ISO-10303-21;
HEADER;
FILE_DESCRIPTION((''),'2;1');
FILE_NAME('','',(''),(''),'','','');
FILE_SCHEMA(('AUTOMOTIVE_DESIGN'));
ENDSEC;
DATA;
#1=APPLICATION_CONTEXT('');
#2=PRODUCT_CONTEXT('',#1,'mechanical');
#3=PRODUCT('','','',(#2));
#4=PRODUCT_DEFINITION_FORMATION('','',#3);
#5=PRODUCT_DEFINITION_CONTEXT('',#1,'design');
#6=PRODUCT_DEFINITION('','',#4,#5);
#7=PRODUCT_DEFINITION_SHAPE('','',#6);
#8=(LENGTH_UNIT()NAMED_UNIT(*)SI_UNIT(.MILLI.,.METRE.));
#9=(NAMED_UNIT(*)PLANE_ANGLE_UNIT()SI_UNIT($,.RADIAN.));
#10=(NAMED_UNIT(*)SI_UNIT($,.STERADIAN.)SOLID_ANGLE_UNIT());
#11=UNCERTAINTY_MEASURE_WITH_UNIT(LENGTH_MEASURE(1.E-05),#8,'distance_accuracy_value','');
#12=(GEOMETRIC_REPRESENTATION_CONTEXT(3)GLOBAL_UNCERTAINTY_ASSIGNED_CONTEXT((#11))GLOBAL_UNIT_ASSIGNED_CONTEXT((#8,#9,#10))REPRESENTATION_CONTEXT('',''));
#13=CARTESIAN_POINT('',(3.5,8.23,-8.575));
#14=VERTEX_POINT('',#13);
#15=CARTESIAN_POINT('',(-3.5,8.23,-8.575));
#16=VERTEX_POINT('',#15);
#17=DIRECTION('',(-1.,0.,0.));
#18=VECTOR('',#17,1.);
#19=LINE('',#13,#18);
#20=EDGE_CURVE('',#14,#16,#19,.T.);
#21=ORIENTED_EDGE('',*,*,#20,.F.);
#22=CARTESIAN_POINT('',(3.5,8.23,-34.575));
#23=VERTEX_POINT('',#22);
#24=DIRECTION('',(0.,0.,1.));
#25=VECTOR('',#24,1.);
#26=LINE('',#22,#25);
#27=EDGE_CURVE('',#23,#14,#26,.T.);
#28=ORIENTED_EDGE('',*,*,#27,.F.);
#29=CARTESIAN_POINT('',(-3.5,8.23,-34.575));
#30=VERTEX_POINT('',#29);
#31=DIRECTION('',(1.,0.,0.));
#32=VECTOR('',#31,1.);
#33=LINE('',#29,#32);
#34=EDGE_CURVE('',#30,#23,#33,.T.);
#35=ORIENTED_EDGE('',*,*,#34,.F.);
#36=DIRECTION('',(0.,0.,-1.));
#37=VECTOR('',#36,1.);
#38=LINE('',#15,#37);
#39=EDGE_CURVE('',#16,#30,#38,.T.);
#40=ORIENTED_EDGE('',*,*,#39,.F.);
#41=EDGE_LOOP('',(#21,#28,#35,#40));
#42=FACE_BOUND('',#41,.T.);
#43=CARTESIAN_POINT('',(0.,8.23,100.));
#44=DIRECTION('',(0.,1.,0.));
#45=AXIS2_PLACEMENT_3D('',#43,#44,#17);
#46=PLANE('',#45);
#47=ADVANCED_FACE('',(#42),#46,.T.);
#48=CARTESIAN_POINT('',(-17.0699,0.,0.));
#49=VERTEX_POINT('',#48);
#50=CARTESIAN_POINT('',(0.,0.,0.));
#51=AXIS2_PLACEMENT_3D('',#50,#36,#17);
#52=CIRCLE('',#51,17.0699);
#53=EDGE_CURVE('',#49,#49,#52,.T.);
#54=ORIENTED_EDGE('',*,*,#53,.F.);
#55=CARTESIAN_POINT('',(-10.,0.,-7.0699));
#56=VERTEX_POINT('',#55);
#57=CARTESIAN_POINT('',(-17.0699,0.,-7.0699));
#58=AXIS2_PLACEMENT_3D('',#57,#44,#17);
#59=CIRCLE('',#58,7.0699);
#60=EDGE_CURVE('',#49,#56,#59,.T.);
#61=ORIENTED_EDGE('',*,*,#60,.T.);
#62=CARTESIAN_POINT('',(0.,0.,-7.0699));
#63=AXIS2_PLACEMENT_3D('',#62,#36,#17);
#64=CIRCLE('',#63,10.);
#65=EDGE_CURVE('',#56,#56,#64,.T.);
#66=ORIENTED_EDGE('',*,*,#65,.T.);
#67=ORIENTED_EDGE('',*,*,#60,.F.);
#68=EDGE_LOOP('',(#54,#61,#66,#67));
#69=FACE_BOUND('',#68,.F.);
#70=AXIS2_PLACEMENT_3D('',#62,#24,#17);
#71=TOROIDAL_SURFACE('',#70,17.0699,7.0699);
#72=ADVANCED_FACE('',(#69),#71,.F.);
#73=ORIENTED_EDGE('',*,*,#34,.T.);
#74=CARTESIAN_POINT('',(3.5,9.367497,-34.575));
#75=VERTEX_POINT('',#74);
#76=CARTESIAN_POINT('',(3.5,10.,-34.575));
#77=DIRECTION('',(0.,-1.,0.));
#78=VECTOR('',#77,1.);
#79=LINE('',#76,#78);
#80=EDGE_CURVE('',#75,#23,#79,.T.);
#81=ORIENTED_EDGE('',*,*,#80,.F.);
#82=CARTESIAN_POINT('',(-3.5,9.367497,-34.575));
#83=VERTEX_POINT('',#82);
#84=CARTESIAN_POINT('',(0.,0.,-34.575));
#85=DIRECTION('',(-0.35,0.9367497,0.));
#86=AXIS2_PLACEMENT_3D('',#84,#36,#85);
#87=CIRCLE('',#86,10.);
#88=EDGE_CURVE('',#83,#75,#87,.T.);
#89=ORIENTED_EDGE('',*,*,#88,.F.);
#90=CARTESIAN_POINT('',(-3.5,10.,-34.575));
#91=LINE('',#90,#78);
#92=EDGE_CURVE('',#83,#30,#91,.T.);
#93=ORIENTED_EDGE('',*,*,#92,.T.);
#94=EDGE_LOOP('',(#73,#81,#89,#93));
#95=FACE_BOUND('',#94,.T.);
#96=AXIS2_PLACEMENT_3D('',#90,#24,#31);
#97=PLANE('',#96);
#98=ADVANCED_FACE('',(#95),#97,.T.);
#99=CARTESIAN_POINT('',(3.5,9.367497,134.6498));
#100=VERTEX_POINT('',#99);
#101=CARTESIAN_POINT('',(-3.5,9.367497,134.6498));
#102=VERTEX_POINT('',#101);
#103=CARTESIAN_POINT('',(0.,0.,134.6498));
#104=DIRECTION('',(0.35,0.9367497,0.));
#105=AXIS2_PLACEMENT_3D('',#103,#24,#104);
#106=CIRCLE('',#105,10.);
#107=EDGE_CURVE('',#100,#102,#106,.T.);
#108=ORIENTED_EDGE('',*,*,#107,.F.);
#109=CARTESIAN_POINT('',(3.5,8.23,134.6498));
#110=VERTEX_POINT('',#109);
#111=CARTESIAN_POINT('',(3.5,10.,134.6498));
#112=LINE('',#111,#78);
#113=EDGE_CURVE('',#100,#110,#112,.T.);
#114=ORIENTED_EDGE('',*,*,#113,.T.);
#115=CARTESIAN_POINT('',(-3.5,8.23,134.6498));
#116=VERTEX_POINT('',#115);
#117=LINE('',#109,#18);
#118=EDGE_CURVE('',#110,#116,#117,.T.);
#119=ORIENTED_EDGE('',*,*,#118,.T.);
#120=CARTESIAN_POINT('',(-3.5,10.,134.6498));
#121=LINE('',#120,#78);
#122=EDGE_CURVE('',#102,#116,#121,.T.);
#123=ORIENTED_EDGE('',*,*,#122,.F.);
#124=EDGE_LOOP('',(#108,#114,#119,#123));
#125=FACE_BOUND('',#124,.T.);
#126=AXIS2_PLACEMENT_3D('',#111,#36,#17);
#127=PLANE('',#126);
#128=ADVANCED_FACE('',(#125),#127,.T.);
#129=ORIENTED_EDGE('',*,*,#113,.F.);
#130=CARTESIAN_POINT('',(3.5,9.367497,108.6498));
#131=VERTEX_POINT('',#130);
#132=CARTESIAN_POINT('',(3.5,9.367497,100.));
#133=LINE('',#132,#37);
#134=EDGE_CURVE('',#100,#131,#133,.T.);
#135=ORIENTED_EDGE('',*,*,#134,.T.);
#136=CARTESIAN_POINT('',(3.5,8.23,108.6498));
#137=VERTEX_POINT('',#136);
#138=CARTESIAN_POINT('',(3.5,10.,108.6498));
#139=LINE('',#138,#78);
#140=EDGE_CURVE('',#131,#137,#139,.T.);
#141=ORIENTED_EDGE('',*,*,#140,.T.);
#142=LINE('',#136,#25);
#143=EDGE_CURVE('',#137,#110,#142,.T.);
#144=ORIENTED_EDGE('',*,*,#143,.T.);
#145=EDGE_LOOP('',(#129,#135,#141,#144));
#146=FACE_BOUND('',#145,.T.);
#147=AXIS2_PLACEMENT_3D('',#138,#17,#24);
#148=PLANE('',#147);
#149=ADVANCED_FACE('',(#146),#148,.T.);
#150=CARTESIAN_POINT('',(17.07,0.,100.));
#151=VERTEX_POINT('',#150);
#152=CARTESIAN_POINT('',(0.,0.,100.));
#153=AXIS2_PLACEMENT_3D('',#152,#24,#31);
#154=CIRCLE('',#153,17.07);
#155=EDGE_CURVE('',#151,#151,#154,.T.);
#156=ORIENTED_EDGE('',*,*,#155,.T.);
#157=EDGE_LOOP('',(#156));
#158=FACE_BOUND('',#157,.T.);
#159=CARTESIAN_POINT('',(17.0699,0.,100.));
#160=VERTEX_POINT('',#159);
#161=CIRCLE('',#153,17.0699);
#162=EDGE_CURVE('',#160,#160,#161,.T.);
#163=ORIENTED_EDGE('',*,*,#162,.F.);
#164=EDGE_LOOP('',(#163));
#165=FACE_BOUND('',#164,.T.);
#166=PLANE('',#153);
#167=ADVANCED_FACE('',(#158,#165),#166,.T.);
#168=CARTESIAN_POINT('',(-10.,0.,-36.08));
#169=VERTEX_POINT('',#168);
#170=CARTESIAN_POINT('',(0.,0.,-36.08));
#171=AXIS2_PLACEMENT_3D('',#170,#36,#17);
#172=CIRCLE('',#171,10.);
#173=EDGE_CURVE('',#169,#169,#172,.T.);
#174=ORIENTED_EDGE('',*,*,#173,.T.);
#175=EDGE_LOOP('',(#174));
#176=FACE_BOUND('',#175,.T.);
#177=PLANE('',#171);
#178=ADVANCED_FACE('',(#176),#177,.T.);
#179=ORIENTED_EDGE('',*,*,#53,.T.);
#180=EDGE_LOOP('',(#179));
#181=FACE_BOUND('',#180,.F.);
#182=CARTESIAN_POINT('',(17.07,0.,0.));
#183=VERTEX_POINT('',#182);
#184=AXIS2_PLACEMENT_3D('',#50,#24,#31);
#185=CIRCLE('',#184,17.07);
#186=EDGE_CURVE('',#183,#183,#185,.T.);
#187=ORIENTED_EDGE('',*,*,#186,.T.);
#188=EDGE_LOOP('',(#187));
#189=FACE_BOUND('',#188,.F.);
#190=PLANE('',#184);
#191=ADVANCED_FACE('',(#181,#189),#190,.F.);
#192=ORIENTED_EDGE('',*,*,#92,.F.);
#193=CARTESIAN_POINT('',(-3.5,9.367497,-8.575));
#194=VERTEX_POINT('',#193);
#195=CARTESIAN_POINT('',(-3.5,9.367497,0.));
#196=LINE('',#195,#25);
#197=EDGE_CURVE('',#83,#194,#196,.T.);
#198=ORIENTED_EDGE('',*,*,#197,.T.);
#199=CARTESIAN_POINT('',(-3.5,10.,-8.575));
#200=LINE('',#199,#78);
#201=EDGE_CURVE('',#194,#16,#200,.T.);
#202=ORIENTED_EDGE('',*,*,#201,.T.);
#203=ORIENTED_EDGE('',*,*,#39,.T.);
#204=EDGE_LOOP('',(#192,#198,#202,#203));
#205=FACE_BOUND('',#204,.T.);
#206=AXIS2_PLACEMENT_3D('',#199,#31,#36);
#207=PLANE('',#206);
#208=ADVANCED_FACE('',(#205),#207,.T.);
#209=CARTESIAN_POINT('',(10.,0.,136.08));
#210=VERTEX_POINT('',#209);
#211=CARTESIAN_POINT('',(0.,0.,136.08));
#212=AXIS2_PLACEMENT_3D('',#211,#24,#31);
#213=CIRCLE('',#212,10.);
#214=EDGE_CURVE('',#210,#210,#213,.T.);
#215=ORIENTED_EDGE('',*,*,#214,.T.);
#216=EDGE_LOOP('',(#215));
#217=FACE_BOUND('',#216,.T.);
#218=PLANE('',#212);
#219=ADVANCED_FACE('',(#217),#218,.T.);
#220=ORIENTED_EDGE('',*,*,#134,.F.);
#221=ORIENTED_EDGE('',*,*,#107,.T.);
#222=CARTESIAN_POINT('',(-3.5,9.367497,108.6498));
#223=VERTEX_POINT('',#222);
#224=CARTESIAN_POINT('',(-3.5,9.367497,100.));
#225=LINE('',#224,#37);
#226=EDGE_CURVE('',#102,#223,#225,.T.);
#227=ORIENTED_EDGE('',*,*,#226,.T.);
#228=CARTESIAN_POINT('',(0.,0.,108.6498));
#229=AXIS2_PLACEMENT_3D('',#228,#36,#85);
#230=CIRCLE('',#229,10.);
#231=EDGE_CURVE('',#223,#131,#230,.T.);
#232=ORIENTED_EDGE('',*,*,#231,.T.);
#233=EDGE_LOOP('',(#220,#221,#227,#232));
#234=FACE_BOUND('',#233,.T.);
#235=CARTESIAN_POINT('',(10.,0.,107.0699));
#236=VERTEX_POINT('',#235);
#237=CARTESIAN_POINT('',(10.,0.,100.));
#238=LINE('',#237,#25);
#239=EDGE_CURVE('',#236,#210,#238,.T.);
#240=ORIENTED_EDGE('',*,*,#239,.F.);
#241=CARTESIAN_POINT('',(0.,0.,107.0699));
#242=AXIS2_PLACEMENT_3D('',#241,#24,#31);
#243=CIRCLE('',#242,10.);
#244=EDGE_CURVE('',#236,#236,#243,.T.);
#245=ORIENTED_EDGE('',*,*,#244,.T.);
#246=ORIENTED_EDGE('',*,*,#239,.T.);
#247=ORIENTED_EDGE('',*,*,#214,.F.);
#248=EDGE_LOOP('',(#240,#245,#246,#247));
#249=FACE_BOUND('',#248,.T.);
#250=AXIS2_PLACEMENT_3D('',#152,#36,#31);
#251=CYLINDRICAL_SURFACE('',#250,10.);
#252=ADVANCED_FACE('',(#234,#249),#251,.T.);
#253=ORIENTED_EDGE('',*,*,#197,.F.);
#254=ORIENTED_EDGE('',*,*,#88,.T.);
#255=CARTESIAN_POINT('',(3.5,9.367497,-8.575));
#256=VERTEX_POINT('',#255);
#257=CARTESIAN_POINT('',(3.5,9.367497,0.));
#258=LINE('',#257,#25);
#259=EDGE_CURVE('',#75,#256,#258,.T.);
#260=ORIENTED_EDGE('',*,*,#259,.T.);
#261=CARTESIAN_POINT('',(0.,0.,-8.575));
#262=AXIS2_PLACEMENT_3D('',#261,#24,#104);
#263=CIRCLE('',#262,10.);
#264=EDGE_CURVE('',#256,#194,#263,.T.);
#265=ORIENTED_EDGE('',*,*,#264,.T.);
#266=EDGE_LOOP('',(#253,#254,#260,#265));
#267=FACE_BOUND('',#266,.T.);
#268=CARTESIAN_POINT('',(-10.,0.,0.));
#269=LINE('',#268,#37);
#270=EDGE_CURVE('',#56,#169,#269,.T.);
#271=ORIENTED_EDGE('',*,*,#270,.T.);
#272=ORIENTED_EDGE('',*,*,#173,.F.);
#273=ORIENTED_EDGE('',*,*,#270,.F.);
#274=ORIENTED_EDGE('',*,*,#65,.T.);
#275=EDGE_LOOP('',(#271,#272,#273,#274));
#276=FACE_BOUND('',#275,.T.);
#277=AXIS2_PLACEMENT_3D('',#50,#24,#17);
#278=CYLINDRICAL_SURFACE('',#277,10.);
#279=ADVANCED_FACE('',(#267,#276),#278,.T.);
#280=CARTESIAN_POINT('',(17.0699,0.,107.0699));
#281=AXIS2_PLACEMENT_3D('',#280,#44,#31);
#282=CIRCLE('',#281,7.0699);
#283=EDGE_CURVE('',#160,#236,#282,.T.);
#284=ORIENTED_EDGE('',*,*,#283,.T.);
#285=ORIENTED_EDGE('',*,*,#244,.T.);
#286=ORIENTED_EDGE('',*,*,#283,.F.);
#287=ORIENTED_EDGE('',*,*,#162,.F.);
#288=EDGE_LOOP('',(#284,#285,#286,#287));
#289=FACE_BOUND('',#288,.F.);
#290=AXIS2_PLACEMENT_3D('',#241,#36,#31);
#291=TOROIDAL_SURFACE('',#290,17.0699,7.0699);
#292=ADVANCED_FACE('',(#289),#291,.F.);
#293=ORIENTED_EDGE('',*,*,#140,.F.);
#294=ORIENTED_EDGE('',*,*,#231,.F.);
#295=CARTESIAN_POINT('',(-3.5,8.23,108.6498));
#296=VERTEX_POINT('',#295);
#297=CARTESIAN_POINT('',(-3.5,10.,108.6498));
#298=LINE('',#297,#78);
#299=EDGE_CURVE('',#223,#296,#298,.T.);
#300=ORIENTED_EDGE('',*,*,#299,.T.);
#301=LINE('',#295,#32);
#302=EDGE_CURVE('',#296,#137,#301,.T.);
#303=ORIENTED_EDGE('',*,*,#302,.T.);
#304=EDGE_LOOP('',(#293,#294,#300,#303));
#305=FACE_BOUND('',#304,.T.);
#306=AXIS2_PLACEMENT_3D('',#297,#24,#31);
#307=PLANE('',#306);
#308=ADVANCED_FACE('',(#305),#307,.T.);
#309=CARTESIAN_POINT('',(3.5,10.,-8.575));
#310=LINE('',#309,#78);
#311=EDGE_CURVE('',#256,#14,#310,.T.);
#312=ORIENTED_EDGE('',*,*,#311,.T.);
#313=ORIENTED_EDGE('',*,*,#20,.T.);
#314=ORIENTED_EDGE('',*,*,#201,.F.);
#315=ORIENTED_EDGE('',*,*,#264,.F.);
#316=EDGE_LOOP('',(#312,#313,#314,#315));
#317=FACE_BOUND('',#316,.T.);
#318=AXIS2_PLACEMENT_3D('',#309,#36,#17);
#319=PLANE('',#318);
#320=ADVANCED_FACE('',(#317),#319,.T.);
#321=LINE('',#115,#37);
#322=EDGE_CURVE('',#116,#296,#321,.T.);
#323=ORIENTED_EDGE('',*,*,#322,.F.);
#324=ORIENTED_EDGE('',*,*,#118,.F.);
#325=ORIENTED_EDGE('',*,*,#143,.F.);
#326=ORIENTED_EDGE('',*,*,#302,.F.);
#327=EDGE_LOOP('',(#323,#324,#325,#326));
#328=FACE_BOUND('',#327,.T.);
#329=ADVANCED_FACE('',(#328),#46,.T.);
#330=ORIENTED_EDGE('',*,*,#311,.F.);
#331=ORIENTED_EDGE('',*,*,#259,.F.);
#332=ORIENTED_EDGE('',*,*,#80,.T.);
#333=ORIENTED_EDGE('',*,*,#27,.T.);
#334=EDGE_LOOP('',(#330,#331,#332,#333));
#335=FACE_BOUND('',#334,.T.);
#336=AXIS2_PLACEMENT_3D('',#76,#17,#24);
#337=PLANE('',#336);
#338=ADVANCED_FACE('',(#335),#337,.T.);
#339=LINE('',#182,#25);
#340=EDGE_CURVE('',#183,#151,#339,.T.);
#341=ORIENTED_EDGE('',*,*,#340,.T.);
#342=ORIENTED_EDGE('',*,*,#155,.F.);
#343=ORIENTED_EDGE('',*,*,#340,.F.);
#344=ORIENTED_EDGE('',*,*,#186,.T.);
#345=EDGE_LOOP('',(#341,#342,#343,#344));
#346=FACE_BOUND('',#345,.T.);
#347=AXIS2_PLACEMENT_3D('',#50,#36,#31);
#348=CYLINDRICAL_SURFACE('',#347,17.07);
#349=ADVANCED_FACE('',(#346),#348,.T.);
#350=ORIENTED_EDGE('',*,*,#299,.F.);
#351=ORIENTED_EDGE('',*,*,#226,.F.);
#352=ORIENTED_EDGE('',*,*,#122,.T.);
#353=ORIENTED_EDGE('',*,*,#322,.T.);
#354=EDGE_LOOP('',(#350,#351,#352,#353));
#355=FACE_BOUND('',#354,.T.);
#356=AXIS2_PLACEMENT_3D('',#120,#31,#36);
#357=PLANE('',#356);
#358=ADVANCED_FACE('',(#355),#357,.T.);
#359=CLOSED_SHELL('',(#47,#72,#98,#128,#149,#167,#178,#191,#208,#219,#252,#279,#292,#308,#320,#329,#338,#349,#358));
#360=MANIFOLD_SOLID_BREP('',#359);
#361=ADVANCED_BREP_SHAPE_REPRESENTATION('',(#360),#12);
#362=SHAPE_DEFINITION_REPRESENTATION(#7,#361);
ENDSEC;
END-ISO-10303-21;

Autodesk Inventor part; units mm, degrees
ref_plane "YZ Plane" through (0, 0, 0) normal (1, 0, 0) x (0, 1, 0)
ref_plane "XY Plane" through (0, 0, 0) normal (0, 0, 1) x (1, 0, 0)
sketch "Boceto1" plane through (0, 0, 0) normal (0, 0, 1) x (1, 0, 0)
  circle A0 centre (0, 0) radius 17.07
  dimension "d0" = 34.14
extrude "Extrusión1" add sketch "Boceto1" along normal blind 100
sketch "Boceto2" plane through (0, 0, 100) normal (0, 0, 1) x (1, 0, 0)
  circle A0 centre (0, 0) radius 10
  dimension "d3" = 20
extrude "Extrusión2" add sketch "Boceto2" along normal blind 36.08
sketch "Boceto3" plane through (0, 0, 0) normal (0, 0, -1) x (-1, 0, 0)
  circle A0 centre (0, 0) radius 10
  dimension "d6" = 20
extrude "Extrusión3" add sketch "Boceto3" along normal blind 36.08
fillet "Empalme1" radius 7.07 1 edges at (-10, 0, 100)
fillet "Empalme2" radius 7.07 1 edges at (10, 0, 0)
ref_plane "Plano de trabajo1" through (0, 10, 100) normal (0, 1, 0) x (-1, 0, 0)
sketch "Boceto4" plane through (0, 10, 100) normal (0, 1, 0) x (-1, 0, 0)
  line L0 (10, 36.08) -> (-10, 36.08) projected
  line L1 (-3.5, 34.6498) -> (3.5, 34.6498)
  line L2 (3.5, 34.6498) -> (3.5, 8.6498)
  line L3 (3.5, 8.6498) -> (-3.5, 8.6498)
  line L4 (-3.5, 8.6498) -> (-3.5, 34.6498)
  line L5 (-3.5, 34.6498) -> (3.5, 8.6498) construction
  line L6 (3.5, 34.6498) -> (-3.5, 8.6498) construction
  line L7 (10, -107.07) -> (-10, -107.07) projected
  line L8 (-10, -136.08) -> (10, -136.08) projected
  line L9 (10, -107.07) -> (10, -136.08) projected
  line L10 (-3.5, -108.575) -> (3.5, -108.575)
  line L11 (3.5, -108.575) -> (3.5, -134.575)
  line L12 (3.5, -134.575) -> (-3.5, -134.575)
  line L13 (-3.5, -134.575) -> (-3.5, -108.575)
  point P0 (0, -100)
  point P1 (0, 21.6498)
  dimension "d11" = 7
  dimension "d12" = 26
  dimension "d13" = 7
  dimension "d14" = 26
extrude "Extrusión4" cut sketch "Boceto4" against normal blind 1.77
properties part number "Eje cuñero"
